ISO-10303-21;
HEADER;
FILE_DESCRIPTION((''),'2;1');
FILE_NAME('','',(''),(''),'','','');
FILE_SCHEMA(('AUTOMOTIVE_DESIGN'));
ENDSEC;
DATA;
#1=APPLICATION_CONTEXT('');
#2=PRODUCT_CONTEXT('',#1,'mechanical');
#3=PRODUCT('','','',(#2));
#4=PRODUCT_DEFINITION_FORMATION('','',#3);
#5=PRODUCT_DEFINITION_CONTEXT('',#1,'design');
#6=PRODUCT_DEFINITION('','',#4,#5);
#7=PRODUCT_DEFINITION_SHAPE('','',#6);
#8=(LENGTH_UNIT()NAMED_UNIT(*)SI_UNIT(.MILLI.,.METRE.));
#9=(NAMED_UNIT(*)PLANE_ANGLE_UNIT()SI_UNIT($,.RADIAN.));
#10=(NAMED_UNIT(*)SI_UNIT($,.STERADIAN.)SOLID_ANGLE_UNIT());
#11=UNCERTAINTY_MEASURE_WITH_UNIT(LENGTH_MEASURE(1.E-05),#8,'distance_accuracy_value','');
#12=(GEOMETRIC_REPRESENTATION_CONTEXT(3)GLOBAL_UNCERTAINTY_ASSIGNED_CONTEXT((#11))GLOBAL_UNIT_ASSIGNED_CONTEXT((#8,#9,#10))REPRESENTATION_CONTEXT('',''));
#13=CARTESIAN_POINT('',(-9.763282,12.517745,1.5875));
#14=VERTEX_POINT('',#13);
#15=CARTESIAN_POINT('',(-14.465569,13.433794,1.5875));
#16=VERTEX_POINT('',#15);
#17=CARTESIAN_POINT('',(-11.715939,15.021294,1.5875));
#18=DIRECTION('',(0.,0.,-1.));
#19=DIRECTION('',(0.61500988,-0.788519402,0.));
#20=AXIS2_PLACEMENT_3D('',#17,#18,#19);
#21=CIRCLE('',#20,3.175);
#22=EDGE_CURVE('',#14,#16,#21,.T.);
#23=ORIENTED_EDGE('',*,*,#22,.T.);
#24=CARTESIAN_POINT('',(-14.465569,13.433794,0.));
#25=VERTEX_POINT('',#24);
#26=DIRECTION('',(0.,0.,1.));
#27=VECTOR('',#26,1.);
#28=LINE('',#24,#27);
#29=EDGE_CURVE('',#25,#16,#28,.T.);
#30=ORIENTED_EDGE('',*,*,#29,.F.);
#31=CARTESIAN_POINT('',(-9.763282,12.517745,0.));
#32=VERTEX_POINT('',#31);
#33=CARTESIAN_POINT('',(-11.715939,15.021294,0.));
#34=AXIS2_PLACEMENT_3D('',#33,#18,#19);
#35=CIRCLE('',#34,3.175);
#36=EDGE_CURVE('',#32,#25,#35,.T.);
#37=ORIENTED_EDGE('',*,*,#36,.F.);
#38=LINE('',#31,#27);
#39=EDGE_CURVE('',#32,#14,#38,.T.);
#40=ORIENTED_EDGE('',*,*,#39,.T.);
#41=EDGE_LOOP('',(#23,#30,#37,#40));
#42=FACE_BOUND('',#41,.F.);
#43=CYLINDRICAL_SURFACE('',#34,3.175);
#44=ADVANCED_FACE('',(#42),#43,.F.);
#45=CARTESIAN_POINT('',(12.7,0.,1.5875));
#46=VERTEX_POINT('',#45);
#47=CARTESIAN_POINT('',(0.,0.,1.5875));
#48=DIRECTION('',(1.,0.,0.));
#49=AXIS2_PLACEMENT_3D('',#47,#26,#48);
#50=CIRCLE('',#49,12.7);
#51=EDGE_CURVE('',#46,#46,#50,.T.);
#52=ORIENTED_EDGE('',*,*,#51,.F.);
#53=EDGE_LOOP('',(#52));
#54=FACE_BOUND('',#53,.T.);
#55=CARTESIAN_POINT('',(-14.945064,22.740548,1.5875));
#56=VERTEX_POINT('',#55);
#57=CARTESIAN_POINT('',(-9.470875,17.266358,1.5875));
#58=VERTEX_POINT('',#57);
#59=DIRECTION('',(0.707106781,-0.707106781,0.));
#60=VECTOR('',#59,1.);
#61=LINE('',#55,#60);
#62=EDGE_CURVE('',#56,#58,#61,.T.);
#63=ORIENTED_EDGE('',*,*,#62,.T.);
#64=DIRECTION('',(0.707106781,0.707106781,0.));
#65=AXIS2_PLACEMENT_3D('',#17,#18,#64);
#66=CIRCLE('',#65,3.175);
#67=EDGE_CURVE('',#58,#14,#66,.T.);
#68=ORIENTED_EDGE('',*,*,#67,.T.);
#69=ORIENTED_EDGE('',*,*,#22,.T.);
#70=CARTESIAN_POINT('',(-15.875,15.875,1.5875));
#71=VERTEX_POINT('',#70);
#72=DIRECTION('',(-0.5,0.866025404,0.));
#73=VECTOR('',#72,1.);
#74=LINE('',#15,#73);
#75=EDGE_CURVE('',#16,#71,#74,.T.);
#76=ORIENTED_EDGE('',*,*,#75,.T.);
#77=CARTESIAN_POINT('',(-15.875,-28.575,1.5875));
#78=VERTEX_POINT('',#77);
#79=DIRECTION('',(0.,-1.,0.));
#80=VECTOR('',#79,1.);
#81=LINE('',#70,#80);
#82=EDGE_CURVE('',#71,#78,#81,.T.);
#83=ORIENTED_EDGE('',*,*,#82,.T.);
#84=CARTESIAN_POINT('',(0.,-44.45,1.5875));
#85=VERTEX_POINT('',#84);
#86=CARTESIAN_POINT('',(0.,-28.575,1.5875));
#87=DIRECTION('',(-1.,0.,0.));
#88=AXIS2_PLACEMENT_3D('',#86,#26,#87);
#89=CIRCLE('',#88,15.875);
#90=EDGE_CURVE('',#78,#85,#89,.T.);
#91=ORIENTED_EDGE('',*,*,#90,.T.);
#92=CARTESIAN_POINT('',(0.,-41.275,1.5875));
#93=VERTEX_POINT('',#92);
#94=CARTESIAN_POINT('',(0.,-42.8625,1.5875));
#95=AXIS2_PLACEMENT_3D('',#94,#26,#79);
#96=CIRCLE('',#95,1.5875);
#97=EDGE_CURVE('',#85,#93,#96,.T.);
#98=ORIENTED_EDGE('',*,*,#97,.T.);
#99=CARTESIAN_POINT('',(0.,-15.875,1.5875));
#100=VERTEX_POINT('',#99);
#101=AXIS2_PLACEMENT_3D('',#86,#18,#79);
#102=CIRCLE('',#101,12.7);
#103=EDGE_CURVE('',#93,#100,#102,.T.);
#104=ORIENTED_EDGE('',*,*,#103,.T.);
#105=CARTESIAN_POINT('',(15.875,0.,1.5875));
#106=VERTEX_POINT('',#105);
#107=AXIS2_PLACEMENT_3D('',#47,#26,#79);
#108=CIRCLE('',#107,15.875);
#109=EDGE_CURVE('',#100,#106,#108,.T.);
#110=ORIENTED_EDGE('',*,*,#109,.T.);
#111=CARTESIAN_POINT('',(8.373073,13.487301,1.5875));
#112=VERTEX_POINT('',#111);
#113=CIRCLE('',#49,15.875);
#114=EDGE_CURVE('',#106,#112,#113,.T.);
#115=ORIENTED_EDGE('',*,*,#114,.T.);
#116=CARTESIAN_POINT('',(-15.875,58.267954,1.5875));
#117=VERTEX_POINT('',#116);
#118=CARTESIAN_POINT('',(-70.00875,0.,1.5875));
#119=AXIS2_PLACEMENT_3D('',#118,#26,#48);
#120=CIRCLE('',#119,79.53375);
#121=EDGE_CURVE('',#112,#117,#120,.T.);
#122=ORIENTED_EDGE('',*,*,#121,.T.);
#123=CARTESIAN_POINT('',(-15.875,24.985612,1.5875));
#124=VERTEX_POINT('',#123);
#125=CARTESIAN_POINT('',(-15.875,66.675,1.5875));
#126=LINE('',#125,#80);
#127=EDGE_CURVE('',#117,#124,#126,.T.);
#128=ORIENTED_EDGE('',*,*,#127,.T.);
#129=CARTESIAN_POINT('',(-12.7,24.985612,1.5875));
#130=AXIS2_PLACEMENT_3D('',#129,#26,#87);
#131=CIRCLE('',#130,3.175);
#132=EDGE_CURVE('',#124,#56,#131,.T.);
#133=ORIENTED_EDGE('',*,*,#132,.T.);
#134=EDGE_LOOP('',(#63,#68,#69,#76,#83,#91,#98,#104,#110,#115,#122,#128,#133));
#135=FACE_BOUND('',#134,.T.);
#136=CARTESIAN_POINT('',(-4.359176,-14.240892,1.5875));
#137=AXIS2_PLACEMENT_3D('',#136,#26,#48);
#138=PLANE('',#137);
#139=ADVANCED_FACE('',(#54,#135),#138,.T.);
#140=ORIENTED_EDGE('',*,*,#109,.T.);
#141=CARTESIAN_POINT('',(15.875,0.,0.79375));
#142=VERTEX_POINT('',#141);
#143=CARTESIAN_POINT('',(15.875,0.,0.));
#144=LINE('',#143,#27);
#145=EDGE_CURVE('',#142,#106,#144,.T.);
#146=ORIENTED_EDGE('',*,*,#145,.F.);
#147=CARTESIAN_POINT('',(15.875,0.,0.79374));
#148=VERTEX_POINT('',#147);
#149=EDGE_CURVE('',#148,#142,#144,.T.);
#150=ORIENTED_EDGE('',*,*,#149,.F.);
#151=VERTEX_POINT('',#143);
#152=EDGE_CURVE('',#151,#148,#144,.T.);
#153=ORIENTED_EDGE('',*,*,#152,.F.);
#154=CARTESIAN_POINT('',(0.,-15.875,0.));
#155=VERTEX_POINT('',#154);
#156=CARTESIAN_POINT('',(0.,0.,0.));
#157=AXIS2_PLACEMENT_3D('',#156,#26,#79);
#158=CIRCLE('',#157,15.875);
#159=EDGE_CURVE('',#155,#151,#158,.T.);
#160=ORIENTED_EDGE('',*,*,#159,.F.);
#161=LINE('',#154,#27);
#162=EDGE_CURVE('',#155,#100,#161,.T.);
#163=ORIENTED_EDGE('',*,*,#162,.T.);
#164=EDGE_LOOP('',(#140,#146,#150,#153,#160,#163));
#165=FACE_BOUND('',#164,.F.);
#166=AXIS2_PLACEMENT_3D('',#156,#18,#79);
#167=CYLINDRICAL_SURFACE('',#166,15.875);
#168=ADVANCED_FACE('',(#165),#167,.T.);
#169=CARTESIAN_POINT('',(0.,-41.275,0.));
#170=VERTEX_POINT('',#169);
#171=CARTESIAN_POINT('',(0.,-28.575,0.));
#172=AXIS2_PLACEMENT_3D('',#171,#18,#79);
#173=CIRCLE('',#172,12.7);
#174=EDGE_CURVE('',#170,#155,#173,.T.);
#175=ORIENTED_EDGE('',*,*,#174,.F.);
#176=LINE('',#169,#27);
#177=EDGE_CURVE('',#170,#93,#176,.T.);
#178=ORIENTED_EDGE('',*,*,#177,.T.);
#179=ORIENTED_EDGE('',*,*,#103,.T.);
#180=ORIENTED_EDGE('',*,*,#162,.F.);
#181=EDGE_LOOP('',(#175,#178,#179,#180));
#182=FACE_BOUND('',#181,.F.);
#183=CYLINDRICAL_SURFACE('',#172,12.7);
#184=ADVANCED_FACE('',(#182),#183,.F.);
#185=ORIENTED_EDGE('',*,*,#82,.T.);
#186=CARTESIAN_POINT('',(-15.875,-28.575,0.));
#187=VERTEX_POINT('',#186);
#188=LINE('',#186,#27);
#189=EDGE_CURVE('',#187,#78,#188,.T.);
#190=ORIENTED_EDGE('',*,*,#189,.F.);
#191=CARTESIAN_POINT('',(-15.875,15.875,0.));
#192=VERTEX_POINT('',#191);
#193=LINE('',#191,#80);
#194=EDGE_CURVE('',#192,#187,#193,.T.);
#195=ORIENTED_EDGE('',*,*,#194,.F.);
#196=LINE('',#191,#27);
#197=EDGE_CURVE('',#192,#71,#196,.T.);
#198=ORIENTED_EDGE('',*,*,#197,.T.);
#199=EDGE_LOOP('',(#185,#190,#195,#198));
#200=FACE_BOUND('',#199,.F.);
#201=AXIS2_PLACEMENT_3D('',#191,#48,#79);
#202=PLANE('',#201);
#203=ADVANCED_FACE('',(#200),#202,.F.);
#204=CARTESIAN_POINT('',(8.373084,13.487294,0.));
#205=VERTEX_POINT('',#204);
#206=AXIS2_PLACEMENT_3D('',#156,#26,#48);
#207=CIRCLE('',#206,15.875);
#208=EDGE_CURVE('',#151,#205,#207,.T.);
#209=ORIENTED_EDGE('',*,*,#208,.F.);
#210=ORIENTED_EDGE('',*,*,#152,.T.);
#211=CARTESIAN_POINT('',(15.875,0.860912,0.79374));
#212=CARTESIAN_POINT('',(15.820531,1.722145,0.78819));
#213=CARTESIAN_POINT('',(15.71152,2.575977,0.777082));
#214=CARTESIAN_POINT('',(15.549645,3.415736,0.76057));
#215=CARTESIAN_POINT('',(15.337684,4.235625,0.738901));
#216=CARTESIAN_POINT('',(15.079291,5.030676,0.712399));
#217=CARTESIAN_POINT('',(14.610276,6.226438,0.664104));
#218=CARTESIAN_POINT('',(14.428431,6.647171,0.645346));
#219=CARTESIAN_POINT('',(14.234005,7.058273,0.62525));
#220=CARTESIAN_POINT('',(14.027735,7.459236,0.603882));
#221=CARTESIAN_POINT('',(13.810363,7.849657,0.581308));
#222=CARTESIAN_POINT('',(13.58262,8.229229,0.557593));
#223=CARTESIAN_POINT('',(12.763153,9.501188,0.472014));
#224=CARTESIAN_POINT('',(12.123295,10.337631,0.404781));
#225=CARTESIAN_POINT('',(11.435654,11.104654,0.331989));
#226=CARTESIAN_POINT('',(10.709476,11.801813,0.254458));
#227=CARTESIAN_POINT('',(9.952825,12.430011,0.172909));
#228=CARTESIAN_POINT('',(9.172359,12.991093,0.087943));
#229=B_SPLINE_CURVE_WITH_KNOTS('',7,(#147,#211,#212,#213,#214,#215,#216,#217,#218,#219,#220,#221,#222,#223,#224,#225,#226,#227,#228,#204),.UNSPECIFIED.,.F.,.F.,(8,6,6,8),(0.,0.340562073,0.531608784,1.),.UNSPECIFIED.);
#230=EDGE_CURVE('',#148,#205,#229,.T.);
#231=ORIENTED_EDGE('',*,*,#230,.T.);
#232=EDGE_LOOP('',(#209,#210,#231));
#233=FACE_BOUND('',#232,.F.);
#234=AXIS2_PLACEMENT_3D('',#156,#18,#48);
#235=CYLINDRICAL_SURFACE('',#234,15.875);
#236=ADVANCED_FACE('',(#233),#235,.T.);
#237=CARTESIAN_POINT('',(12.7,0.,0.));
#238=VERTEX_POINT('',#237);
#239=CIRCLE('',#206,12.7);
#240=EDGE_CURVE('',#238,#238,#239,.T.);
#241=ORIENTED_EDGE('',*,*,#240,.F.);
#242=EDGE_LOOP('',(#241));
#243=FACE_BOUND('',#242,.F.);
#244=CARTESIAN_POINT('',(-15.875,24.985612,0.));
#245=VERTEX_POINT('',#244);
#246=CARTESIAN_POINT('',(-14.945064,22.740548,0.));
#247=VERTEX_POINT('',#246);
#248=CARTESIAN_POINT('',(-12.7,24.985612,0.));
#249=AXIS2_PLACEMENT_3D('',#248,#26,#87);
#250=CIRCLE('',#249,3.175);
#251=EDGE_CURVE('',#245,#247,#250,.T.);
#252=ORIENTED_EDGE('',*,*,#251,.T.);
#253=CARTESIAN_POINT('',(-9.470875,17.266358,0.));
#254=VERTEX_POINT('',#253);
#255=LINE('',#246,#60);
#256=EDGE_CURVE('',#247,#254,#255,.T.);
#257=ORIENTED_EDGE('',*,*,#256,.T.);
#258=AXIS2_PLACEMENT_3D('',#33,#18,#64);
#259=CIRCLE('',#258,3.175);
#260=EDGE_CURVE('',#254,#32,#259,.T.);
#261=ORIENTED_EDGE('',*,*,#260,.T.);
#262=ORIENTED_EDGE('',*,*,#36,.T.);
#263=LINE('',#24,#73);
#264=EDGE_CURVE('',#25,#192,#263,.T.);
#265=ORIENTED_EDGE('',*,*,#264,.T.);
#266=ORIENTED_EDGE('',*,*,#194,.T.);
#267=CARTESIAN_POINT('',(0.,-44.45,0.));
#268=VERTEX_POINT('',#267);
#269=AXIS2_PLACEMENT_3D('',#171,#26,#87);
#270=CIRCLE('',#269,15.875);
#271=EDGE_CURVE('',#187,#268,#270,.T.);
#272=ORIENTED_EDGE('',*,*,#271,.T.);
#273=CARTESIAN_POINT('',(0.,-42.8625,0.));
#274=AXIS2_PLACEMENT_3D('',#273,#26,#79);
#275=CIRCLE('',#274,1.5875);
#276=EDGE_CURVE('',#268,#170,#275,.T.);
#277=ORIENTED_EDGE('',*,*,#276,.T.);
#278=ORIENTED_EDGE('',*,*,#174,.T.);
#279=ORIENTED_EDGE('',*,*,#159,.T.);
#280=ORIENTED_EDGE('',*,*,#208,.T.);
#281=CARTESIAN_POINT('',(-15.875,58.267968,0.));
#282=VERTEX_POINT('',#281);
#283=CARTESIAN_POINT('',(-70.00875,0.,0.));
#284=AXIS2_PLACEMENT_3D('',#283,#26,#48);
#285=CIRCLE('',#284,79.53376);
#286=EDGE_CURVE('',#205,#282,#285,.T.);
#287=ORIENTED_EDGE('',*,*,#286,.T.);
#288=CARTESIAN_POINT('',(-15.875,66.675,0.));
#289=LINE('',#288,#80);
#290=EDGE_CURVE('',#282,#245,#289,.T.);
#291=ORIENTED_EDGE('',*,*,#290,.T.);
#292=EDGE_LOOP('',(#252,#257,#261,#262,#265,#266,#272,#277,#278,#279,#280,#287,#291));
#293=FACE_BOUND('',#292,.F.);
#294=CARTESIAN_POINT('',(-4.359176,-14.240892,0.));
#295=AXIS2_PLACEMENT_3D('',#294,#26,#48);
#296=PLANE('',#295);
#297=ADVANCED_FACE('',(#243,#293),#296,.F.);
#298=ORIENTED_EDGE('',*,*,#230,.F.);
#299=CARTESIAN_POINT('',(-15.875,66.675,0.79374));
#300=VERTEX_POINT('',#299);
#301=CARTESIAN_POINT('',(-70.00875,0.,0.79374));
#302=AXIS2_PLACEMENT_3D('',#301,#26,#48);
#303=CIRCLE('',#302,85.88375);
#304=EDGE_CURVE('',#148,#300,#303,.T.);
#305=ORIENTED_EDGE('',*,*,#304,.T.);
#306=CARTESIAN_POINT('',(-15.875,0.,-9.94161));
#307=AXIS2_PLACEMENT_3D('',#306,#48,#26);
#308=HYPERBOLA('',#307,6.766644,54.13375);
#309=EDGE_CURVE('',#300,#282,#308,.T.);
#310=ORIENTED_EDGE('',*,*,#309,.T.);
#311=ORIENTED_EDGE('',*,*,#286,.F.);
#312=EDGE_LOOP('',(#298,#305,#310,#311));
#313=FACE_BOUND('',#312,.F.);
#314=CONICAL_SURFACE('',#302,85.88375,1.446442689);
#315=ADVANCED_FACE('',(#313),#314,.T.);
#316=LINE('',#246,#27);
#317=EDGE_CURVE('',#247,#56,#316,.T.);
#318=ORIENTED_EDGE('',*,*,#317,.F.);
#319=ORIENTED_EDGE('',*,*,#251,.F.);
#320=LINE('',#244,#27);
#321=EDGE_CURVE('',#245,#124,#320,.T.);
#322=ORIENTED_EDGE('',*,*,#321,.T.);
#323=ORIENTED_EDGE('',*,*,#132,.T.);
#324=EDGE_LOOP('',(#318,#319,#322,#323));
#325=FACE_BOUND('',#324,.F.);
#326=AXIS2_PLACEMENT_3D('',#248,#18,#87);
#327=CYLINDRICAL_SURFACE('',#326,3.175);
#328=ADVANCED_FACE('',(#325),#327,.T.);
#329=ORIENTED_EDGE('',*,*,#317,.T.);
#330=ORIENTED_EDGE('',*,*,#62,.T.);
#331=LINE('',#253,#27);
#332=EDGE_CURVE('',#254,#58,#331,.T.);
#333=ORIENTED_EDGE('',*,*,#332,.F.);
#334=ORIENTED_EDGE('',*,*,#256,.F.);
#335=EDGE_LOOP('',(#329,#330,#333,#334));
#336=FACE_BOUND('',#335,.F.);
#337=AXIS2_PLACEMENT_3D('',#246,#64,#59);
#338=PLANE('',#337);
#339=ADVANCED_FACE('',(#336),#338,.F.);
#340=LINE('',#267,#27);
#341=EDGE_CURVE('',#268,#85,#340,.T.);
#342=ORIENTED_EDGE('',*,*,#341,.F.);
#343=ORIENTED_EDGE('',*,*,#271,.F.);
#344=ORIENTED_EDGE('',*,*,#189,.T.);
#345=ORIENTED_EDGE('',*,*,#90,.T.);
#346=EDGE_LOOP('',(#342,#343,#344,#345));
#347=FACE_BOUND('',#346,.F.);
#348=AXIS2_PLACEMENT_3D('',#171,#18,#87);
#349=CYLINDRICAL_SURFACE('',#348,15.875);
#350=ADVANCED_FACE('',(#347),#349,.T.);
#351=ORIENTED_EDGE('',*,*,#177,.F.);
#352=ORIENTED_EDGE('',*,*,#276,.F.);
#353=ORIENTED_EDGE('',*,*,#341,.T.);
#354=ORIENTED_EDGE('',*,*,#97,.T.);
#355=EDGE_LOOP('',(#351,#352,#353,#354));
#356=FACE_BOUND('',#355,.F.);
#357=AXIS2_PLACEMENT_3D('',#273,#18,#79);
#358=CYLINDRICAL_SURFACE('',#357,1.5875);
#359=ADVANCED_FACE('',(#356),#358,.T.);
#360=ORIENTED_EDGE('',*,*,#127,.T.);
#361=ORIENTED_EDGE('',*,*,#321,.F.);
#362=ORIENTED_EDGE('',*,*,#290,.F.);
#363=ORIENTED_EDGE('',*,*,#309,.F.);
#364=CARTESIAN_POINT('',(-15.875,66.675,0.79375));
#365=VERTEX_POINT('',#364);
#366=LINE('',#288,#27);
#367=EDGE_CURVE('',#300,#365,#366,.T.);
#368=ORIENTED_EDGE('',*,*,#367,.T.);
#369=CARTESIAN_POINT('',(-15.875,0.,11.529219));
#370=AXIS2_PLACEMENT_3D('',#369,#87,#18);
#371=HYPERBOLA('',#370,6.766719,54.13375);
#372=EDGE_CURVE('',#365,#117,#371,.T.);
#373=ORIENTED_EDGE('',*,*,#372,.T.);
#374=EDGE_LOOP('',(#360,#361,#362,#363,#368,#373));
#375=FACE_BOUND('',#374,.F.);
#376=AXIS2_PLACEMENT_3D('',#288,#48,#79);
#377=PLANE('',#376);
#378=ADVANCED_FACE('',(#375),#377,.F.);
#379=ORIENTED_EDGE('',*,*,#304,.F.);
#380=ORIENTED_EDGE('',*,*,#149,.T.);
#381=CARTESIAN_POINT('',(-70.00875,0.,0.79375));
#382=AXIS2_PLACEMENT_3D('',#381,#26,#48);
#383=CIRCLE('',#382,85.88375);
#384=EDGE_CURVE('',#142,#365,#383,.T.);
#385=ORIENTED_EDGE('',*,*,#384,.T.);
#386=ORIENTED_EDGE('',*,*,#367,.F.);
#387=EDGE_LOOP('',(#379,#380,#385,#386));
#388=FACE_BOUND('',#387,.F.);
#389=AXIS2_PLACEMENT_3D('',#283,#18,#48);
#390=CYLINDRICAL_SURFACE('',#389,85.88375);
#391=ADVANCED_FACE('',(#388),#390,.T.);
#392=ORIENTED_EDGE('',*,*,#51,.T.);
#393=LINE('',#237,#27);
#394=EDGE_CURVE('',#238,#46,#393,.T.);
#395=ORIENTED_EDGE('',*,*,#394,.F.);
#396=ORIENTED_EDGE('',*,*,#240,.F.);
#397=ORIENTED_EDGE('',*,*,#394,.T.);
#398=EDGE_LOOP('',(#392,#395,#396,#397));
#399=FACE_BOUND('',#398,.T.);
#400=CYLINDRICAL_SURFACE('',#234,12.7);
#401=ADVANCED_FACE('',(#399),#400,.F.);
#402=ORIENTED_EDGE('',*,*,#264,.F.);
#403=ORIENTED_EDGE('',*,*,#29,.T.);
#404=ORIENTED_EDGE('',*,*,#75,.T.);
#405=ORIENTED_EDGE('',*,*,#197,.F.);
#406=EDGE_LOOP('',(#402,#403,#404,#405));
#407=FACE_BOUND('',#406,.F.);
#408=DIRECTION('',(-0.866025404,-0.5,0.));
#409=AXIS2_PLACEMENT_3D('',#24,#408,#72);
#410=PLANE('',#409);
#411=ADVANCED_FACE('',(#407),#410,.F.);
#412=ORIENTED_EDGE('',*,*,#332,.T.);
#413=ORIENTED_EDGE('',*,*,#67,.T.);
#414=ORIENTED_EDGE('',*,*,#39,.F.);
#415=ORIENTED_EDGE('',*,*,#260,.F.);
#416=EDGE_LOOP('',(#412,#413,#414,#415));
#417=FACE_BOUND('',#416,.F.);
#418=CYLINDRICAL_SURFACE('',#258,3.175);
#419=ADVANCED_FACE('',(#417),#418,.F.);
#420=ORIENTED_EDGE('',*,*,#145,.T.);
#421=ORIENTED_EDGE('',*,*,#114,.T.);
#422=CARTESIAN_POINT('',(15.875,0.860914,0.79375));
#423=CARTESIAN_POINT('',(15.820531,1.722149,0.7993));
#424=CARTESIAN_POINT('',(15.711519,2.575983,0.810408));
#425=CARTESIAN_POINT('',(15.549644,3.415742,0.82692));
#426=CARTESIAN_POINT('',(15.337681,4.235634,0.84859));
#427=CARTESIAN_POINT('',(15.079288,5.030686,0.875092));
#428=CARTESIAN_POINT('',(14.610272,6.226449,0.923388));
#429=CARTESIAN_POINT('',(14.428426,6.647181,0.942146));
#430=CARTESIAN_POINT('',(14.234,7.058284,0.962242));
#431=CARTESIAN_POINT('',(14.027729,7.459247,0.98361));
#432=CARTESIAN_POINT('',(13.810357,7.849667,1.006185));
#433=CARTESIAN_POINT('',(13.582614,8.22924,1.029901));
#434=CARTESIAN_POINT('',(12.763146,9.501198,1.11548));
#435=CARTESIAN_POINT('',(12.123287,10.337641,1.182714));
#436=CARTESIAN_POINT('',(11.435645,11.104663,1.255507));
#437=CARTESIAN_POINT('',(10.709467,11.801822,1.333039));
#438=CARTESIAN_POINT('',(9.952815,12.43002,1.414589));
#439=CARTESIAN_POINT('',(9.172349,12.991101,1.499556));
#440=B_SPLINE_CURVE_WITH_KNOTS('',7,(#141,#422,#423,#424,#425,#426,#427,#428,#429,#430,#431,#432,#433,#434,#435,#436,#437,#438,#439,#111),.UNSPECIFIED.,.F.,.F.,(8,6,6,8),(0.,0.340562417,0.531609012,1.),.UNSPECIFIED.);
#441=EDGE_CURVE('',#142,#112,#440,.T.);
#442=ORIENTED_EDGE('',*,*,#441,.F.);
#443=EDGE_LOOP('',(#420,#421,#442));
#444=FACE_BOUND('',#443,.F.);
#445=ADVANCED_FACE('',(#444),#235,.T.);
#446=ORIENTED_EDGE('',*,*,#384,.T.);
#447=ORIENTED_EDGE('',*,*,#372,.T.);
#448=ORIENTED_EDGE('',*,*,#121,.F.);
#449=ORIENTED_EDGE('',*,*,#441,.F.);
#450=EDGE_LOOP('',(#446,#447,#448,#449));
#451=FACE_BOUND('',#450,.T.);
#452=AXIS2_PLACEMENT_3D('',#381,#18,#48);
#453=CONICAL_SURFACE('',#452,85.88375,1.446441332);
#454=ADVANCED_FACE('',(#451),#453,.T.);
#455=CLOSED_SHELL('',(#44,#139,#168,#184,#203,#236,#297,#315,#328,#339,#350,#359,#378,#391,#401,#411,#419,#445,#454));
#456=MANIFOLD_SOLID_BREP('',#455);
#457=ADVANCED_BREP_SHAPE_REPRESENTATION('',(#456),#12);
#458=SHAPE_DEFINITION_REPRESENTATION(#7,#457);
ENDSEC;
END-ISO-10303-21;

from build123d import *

# Parameters (mm, degrees)
F1_DEPTH = 1.5875
F2_SIZE2 = 6.35
F2_SIZE  = 0.79375
F3_SIZE2 = 6.34999
F3_SIZE  = 0.79374
F0_R     = 12.7
F4_DEPTH = 1.5875


# Not quite as in the source:
# - a fillet or chamfer is up to 0.001 mm smaller than in the source, because OpenCascade refuses the exact size


with BuildPart() as f1:
    # F0 (on Top) → F1 (new body)
    with BuildSketch(Plane.XY):
        with BuildLine():
            ThreePointArc((-9.7632822165, 12.5177452188), (6.9650383995, 14.2654780885), (15.875, 0))
            ThreePointArc((15.875, 0), (7.5322970835, 36.924308135), (-15.875, 66.675))
            Line((-15.875, 66.675), (-15.875, 24.9856118545))
            ThreePointArc((-15.875, 24.9856118545), (-15.6333175157, 23.7705919567), (-14.9450640303, 22.7405478242))
            Line((-14.9450640303, 22.7405478242), (-9.4708745561, 17.26635835))
            ThreePointArc((-9.4708745561, 17.26635835), (-8.5469409835, 14.8261554131), (-9.7632822165, 12.5177452188))
        make_face()
    extrude(amount=F1_DEPTH)

    # F2
    f2_edges = [f1.edges().sort_by_distance(p)[0] for p in [
        (7.532297, 36.924308, 1.5875),
    ]]
    f2_side = f1.faces().sort_by_distance((7.532297, 36.924308, 0.79375))[0]
    chamfer(f2_edges, length=F2_SIZE, length2=F2_SIZE2, reference=f2_side)

    # F3 (size 0.79375 and 6.35 in the source; OpenCascade refuses exactly that, so slightly less here)
    f3_edges = [f1.edges().sort_by_distance(p)[0] for p in [
        (7.532297, 36.924308, 0),
    ]]
    f3_side = f1.faces().sort_by_distance((7.532297, 36.924308, 0.396875))[0]
    chamfer(f3_edges, length=F3_SIZE, length2=F3_SIZE2, reference=f3_side)

    # F0 (on Top) → F4 (join)
    with BuildSketch(Plane.XY):
        with BuildLine():
            ThreePointArc((0, -15.875), (11.2253201513, -11.2253201513), (15.875, 0))
            ThreePointArc((15.875, 0), (6.9650383995, 14.2654780885), (-9.7632822165, 12.5177452188))
            ThreePointArc((-9.7632822165, 12.5177452188), (-14.2654780885, 6.9650383995), (-15.875, 0))
            Line((-15.875, 0), (-15.875, -28.575))
            ThreePointArc((-15.875, -28.575), (-11.2253201513, -39.8003201513), (0, -44.45))
            ThreePointArc((0, -44.45), (1.5875, -42.8625), (0, -41.275))
            ThreePointArc((0, -41.275), (-12.7, -28.575), (0, -15.875))
        make_face()
        Circle(F0_R, mode=Mode.SUBTRACT)
        with BuildLine():
            ThreePointArc((-15.875, 0), (-14.2654780885, 6.9650383995), (-9.7632822165, 12.5177452188))
            ThreePointArc((-9.7632822165, 12.5177452188), (-12.3230452429, 11.9048786691), (-14.4655692434, 13.4337943198))
            Line((-14.4655692434, 13.4337943198), (-15.875, 15.875))
            Line((-15.875, 15.875), (-15.875, 0))
        make_face()
    extrude(amount=F4_DEPTH)


solid = f1.part
